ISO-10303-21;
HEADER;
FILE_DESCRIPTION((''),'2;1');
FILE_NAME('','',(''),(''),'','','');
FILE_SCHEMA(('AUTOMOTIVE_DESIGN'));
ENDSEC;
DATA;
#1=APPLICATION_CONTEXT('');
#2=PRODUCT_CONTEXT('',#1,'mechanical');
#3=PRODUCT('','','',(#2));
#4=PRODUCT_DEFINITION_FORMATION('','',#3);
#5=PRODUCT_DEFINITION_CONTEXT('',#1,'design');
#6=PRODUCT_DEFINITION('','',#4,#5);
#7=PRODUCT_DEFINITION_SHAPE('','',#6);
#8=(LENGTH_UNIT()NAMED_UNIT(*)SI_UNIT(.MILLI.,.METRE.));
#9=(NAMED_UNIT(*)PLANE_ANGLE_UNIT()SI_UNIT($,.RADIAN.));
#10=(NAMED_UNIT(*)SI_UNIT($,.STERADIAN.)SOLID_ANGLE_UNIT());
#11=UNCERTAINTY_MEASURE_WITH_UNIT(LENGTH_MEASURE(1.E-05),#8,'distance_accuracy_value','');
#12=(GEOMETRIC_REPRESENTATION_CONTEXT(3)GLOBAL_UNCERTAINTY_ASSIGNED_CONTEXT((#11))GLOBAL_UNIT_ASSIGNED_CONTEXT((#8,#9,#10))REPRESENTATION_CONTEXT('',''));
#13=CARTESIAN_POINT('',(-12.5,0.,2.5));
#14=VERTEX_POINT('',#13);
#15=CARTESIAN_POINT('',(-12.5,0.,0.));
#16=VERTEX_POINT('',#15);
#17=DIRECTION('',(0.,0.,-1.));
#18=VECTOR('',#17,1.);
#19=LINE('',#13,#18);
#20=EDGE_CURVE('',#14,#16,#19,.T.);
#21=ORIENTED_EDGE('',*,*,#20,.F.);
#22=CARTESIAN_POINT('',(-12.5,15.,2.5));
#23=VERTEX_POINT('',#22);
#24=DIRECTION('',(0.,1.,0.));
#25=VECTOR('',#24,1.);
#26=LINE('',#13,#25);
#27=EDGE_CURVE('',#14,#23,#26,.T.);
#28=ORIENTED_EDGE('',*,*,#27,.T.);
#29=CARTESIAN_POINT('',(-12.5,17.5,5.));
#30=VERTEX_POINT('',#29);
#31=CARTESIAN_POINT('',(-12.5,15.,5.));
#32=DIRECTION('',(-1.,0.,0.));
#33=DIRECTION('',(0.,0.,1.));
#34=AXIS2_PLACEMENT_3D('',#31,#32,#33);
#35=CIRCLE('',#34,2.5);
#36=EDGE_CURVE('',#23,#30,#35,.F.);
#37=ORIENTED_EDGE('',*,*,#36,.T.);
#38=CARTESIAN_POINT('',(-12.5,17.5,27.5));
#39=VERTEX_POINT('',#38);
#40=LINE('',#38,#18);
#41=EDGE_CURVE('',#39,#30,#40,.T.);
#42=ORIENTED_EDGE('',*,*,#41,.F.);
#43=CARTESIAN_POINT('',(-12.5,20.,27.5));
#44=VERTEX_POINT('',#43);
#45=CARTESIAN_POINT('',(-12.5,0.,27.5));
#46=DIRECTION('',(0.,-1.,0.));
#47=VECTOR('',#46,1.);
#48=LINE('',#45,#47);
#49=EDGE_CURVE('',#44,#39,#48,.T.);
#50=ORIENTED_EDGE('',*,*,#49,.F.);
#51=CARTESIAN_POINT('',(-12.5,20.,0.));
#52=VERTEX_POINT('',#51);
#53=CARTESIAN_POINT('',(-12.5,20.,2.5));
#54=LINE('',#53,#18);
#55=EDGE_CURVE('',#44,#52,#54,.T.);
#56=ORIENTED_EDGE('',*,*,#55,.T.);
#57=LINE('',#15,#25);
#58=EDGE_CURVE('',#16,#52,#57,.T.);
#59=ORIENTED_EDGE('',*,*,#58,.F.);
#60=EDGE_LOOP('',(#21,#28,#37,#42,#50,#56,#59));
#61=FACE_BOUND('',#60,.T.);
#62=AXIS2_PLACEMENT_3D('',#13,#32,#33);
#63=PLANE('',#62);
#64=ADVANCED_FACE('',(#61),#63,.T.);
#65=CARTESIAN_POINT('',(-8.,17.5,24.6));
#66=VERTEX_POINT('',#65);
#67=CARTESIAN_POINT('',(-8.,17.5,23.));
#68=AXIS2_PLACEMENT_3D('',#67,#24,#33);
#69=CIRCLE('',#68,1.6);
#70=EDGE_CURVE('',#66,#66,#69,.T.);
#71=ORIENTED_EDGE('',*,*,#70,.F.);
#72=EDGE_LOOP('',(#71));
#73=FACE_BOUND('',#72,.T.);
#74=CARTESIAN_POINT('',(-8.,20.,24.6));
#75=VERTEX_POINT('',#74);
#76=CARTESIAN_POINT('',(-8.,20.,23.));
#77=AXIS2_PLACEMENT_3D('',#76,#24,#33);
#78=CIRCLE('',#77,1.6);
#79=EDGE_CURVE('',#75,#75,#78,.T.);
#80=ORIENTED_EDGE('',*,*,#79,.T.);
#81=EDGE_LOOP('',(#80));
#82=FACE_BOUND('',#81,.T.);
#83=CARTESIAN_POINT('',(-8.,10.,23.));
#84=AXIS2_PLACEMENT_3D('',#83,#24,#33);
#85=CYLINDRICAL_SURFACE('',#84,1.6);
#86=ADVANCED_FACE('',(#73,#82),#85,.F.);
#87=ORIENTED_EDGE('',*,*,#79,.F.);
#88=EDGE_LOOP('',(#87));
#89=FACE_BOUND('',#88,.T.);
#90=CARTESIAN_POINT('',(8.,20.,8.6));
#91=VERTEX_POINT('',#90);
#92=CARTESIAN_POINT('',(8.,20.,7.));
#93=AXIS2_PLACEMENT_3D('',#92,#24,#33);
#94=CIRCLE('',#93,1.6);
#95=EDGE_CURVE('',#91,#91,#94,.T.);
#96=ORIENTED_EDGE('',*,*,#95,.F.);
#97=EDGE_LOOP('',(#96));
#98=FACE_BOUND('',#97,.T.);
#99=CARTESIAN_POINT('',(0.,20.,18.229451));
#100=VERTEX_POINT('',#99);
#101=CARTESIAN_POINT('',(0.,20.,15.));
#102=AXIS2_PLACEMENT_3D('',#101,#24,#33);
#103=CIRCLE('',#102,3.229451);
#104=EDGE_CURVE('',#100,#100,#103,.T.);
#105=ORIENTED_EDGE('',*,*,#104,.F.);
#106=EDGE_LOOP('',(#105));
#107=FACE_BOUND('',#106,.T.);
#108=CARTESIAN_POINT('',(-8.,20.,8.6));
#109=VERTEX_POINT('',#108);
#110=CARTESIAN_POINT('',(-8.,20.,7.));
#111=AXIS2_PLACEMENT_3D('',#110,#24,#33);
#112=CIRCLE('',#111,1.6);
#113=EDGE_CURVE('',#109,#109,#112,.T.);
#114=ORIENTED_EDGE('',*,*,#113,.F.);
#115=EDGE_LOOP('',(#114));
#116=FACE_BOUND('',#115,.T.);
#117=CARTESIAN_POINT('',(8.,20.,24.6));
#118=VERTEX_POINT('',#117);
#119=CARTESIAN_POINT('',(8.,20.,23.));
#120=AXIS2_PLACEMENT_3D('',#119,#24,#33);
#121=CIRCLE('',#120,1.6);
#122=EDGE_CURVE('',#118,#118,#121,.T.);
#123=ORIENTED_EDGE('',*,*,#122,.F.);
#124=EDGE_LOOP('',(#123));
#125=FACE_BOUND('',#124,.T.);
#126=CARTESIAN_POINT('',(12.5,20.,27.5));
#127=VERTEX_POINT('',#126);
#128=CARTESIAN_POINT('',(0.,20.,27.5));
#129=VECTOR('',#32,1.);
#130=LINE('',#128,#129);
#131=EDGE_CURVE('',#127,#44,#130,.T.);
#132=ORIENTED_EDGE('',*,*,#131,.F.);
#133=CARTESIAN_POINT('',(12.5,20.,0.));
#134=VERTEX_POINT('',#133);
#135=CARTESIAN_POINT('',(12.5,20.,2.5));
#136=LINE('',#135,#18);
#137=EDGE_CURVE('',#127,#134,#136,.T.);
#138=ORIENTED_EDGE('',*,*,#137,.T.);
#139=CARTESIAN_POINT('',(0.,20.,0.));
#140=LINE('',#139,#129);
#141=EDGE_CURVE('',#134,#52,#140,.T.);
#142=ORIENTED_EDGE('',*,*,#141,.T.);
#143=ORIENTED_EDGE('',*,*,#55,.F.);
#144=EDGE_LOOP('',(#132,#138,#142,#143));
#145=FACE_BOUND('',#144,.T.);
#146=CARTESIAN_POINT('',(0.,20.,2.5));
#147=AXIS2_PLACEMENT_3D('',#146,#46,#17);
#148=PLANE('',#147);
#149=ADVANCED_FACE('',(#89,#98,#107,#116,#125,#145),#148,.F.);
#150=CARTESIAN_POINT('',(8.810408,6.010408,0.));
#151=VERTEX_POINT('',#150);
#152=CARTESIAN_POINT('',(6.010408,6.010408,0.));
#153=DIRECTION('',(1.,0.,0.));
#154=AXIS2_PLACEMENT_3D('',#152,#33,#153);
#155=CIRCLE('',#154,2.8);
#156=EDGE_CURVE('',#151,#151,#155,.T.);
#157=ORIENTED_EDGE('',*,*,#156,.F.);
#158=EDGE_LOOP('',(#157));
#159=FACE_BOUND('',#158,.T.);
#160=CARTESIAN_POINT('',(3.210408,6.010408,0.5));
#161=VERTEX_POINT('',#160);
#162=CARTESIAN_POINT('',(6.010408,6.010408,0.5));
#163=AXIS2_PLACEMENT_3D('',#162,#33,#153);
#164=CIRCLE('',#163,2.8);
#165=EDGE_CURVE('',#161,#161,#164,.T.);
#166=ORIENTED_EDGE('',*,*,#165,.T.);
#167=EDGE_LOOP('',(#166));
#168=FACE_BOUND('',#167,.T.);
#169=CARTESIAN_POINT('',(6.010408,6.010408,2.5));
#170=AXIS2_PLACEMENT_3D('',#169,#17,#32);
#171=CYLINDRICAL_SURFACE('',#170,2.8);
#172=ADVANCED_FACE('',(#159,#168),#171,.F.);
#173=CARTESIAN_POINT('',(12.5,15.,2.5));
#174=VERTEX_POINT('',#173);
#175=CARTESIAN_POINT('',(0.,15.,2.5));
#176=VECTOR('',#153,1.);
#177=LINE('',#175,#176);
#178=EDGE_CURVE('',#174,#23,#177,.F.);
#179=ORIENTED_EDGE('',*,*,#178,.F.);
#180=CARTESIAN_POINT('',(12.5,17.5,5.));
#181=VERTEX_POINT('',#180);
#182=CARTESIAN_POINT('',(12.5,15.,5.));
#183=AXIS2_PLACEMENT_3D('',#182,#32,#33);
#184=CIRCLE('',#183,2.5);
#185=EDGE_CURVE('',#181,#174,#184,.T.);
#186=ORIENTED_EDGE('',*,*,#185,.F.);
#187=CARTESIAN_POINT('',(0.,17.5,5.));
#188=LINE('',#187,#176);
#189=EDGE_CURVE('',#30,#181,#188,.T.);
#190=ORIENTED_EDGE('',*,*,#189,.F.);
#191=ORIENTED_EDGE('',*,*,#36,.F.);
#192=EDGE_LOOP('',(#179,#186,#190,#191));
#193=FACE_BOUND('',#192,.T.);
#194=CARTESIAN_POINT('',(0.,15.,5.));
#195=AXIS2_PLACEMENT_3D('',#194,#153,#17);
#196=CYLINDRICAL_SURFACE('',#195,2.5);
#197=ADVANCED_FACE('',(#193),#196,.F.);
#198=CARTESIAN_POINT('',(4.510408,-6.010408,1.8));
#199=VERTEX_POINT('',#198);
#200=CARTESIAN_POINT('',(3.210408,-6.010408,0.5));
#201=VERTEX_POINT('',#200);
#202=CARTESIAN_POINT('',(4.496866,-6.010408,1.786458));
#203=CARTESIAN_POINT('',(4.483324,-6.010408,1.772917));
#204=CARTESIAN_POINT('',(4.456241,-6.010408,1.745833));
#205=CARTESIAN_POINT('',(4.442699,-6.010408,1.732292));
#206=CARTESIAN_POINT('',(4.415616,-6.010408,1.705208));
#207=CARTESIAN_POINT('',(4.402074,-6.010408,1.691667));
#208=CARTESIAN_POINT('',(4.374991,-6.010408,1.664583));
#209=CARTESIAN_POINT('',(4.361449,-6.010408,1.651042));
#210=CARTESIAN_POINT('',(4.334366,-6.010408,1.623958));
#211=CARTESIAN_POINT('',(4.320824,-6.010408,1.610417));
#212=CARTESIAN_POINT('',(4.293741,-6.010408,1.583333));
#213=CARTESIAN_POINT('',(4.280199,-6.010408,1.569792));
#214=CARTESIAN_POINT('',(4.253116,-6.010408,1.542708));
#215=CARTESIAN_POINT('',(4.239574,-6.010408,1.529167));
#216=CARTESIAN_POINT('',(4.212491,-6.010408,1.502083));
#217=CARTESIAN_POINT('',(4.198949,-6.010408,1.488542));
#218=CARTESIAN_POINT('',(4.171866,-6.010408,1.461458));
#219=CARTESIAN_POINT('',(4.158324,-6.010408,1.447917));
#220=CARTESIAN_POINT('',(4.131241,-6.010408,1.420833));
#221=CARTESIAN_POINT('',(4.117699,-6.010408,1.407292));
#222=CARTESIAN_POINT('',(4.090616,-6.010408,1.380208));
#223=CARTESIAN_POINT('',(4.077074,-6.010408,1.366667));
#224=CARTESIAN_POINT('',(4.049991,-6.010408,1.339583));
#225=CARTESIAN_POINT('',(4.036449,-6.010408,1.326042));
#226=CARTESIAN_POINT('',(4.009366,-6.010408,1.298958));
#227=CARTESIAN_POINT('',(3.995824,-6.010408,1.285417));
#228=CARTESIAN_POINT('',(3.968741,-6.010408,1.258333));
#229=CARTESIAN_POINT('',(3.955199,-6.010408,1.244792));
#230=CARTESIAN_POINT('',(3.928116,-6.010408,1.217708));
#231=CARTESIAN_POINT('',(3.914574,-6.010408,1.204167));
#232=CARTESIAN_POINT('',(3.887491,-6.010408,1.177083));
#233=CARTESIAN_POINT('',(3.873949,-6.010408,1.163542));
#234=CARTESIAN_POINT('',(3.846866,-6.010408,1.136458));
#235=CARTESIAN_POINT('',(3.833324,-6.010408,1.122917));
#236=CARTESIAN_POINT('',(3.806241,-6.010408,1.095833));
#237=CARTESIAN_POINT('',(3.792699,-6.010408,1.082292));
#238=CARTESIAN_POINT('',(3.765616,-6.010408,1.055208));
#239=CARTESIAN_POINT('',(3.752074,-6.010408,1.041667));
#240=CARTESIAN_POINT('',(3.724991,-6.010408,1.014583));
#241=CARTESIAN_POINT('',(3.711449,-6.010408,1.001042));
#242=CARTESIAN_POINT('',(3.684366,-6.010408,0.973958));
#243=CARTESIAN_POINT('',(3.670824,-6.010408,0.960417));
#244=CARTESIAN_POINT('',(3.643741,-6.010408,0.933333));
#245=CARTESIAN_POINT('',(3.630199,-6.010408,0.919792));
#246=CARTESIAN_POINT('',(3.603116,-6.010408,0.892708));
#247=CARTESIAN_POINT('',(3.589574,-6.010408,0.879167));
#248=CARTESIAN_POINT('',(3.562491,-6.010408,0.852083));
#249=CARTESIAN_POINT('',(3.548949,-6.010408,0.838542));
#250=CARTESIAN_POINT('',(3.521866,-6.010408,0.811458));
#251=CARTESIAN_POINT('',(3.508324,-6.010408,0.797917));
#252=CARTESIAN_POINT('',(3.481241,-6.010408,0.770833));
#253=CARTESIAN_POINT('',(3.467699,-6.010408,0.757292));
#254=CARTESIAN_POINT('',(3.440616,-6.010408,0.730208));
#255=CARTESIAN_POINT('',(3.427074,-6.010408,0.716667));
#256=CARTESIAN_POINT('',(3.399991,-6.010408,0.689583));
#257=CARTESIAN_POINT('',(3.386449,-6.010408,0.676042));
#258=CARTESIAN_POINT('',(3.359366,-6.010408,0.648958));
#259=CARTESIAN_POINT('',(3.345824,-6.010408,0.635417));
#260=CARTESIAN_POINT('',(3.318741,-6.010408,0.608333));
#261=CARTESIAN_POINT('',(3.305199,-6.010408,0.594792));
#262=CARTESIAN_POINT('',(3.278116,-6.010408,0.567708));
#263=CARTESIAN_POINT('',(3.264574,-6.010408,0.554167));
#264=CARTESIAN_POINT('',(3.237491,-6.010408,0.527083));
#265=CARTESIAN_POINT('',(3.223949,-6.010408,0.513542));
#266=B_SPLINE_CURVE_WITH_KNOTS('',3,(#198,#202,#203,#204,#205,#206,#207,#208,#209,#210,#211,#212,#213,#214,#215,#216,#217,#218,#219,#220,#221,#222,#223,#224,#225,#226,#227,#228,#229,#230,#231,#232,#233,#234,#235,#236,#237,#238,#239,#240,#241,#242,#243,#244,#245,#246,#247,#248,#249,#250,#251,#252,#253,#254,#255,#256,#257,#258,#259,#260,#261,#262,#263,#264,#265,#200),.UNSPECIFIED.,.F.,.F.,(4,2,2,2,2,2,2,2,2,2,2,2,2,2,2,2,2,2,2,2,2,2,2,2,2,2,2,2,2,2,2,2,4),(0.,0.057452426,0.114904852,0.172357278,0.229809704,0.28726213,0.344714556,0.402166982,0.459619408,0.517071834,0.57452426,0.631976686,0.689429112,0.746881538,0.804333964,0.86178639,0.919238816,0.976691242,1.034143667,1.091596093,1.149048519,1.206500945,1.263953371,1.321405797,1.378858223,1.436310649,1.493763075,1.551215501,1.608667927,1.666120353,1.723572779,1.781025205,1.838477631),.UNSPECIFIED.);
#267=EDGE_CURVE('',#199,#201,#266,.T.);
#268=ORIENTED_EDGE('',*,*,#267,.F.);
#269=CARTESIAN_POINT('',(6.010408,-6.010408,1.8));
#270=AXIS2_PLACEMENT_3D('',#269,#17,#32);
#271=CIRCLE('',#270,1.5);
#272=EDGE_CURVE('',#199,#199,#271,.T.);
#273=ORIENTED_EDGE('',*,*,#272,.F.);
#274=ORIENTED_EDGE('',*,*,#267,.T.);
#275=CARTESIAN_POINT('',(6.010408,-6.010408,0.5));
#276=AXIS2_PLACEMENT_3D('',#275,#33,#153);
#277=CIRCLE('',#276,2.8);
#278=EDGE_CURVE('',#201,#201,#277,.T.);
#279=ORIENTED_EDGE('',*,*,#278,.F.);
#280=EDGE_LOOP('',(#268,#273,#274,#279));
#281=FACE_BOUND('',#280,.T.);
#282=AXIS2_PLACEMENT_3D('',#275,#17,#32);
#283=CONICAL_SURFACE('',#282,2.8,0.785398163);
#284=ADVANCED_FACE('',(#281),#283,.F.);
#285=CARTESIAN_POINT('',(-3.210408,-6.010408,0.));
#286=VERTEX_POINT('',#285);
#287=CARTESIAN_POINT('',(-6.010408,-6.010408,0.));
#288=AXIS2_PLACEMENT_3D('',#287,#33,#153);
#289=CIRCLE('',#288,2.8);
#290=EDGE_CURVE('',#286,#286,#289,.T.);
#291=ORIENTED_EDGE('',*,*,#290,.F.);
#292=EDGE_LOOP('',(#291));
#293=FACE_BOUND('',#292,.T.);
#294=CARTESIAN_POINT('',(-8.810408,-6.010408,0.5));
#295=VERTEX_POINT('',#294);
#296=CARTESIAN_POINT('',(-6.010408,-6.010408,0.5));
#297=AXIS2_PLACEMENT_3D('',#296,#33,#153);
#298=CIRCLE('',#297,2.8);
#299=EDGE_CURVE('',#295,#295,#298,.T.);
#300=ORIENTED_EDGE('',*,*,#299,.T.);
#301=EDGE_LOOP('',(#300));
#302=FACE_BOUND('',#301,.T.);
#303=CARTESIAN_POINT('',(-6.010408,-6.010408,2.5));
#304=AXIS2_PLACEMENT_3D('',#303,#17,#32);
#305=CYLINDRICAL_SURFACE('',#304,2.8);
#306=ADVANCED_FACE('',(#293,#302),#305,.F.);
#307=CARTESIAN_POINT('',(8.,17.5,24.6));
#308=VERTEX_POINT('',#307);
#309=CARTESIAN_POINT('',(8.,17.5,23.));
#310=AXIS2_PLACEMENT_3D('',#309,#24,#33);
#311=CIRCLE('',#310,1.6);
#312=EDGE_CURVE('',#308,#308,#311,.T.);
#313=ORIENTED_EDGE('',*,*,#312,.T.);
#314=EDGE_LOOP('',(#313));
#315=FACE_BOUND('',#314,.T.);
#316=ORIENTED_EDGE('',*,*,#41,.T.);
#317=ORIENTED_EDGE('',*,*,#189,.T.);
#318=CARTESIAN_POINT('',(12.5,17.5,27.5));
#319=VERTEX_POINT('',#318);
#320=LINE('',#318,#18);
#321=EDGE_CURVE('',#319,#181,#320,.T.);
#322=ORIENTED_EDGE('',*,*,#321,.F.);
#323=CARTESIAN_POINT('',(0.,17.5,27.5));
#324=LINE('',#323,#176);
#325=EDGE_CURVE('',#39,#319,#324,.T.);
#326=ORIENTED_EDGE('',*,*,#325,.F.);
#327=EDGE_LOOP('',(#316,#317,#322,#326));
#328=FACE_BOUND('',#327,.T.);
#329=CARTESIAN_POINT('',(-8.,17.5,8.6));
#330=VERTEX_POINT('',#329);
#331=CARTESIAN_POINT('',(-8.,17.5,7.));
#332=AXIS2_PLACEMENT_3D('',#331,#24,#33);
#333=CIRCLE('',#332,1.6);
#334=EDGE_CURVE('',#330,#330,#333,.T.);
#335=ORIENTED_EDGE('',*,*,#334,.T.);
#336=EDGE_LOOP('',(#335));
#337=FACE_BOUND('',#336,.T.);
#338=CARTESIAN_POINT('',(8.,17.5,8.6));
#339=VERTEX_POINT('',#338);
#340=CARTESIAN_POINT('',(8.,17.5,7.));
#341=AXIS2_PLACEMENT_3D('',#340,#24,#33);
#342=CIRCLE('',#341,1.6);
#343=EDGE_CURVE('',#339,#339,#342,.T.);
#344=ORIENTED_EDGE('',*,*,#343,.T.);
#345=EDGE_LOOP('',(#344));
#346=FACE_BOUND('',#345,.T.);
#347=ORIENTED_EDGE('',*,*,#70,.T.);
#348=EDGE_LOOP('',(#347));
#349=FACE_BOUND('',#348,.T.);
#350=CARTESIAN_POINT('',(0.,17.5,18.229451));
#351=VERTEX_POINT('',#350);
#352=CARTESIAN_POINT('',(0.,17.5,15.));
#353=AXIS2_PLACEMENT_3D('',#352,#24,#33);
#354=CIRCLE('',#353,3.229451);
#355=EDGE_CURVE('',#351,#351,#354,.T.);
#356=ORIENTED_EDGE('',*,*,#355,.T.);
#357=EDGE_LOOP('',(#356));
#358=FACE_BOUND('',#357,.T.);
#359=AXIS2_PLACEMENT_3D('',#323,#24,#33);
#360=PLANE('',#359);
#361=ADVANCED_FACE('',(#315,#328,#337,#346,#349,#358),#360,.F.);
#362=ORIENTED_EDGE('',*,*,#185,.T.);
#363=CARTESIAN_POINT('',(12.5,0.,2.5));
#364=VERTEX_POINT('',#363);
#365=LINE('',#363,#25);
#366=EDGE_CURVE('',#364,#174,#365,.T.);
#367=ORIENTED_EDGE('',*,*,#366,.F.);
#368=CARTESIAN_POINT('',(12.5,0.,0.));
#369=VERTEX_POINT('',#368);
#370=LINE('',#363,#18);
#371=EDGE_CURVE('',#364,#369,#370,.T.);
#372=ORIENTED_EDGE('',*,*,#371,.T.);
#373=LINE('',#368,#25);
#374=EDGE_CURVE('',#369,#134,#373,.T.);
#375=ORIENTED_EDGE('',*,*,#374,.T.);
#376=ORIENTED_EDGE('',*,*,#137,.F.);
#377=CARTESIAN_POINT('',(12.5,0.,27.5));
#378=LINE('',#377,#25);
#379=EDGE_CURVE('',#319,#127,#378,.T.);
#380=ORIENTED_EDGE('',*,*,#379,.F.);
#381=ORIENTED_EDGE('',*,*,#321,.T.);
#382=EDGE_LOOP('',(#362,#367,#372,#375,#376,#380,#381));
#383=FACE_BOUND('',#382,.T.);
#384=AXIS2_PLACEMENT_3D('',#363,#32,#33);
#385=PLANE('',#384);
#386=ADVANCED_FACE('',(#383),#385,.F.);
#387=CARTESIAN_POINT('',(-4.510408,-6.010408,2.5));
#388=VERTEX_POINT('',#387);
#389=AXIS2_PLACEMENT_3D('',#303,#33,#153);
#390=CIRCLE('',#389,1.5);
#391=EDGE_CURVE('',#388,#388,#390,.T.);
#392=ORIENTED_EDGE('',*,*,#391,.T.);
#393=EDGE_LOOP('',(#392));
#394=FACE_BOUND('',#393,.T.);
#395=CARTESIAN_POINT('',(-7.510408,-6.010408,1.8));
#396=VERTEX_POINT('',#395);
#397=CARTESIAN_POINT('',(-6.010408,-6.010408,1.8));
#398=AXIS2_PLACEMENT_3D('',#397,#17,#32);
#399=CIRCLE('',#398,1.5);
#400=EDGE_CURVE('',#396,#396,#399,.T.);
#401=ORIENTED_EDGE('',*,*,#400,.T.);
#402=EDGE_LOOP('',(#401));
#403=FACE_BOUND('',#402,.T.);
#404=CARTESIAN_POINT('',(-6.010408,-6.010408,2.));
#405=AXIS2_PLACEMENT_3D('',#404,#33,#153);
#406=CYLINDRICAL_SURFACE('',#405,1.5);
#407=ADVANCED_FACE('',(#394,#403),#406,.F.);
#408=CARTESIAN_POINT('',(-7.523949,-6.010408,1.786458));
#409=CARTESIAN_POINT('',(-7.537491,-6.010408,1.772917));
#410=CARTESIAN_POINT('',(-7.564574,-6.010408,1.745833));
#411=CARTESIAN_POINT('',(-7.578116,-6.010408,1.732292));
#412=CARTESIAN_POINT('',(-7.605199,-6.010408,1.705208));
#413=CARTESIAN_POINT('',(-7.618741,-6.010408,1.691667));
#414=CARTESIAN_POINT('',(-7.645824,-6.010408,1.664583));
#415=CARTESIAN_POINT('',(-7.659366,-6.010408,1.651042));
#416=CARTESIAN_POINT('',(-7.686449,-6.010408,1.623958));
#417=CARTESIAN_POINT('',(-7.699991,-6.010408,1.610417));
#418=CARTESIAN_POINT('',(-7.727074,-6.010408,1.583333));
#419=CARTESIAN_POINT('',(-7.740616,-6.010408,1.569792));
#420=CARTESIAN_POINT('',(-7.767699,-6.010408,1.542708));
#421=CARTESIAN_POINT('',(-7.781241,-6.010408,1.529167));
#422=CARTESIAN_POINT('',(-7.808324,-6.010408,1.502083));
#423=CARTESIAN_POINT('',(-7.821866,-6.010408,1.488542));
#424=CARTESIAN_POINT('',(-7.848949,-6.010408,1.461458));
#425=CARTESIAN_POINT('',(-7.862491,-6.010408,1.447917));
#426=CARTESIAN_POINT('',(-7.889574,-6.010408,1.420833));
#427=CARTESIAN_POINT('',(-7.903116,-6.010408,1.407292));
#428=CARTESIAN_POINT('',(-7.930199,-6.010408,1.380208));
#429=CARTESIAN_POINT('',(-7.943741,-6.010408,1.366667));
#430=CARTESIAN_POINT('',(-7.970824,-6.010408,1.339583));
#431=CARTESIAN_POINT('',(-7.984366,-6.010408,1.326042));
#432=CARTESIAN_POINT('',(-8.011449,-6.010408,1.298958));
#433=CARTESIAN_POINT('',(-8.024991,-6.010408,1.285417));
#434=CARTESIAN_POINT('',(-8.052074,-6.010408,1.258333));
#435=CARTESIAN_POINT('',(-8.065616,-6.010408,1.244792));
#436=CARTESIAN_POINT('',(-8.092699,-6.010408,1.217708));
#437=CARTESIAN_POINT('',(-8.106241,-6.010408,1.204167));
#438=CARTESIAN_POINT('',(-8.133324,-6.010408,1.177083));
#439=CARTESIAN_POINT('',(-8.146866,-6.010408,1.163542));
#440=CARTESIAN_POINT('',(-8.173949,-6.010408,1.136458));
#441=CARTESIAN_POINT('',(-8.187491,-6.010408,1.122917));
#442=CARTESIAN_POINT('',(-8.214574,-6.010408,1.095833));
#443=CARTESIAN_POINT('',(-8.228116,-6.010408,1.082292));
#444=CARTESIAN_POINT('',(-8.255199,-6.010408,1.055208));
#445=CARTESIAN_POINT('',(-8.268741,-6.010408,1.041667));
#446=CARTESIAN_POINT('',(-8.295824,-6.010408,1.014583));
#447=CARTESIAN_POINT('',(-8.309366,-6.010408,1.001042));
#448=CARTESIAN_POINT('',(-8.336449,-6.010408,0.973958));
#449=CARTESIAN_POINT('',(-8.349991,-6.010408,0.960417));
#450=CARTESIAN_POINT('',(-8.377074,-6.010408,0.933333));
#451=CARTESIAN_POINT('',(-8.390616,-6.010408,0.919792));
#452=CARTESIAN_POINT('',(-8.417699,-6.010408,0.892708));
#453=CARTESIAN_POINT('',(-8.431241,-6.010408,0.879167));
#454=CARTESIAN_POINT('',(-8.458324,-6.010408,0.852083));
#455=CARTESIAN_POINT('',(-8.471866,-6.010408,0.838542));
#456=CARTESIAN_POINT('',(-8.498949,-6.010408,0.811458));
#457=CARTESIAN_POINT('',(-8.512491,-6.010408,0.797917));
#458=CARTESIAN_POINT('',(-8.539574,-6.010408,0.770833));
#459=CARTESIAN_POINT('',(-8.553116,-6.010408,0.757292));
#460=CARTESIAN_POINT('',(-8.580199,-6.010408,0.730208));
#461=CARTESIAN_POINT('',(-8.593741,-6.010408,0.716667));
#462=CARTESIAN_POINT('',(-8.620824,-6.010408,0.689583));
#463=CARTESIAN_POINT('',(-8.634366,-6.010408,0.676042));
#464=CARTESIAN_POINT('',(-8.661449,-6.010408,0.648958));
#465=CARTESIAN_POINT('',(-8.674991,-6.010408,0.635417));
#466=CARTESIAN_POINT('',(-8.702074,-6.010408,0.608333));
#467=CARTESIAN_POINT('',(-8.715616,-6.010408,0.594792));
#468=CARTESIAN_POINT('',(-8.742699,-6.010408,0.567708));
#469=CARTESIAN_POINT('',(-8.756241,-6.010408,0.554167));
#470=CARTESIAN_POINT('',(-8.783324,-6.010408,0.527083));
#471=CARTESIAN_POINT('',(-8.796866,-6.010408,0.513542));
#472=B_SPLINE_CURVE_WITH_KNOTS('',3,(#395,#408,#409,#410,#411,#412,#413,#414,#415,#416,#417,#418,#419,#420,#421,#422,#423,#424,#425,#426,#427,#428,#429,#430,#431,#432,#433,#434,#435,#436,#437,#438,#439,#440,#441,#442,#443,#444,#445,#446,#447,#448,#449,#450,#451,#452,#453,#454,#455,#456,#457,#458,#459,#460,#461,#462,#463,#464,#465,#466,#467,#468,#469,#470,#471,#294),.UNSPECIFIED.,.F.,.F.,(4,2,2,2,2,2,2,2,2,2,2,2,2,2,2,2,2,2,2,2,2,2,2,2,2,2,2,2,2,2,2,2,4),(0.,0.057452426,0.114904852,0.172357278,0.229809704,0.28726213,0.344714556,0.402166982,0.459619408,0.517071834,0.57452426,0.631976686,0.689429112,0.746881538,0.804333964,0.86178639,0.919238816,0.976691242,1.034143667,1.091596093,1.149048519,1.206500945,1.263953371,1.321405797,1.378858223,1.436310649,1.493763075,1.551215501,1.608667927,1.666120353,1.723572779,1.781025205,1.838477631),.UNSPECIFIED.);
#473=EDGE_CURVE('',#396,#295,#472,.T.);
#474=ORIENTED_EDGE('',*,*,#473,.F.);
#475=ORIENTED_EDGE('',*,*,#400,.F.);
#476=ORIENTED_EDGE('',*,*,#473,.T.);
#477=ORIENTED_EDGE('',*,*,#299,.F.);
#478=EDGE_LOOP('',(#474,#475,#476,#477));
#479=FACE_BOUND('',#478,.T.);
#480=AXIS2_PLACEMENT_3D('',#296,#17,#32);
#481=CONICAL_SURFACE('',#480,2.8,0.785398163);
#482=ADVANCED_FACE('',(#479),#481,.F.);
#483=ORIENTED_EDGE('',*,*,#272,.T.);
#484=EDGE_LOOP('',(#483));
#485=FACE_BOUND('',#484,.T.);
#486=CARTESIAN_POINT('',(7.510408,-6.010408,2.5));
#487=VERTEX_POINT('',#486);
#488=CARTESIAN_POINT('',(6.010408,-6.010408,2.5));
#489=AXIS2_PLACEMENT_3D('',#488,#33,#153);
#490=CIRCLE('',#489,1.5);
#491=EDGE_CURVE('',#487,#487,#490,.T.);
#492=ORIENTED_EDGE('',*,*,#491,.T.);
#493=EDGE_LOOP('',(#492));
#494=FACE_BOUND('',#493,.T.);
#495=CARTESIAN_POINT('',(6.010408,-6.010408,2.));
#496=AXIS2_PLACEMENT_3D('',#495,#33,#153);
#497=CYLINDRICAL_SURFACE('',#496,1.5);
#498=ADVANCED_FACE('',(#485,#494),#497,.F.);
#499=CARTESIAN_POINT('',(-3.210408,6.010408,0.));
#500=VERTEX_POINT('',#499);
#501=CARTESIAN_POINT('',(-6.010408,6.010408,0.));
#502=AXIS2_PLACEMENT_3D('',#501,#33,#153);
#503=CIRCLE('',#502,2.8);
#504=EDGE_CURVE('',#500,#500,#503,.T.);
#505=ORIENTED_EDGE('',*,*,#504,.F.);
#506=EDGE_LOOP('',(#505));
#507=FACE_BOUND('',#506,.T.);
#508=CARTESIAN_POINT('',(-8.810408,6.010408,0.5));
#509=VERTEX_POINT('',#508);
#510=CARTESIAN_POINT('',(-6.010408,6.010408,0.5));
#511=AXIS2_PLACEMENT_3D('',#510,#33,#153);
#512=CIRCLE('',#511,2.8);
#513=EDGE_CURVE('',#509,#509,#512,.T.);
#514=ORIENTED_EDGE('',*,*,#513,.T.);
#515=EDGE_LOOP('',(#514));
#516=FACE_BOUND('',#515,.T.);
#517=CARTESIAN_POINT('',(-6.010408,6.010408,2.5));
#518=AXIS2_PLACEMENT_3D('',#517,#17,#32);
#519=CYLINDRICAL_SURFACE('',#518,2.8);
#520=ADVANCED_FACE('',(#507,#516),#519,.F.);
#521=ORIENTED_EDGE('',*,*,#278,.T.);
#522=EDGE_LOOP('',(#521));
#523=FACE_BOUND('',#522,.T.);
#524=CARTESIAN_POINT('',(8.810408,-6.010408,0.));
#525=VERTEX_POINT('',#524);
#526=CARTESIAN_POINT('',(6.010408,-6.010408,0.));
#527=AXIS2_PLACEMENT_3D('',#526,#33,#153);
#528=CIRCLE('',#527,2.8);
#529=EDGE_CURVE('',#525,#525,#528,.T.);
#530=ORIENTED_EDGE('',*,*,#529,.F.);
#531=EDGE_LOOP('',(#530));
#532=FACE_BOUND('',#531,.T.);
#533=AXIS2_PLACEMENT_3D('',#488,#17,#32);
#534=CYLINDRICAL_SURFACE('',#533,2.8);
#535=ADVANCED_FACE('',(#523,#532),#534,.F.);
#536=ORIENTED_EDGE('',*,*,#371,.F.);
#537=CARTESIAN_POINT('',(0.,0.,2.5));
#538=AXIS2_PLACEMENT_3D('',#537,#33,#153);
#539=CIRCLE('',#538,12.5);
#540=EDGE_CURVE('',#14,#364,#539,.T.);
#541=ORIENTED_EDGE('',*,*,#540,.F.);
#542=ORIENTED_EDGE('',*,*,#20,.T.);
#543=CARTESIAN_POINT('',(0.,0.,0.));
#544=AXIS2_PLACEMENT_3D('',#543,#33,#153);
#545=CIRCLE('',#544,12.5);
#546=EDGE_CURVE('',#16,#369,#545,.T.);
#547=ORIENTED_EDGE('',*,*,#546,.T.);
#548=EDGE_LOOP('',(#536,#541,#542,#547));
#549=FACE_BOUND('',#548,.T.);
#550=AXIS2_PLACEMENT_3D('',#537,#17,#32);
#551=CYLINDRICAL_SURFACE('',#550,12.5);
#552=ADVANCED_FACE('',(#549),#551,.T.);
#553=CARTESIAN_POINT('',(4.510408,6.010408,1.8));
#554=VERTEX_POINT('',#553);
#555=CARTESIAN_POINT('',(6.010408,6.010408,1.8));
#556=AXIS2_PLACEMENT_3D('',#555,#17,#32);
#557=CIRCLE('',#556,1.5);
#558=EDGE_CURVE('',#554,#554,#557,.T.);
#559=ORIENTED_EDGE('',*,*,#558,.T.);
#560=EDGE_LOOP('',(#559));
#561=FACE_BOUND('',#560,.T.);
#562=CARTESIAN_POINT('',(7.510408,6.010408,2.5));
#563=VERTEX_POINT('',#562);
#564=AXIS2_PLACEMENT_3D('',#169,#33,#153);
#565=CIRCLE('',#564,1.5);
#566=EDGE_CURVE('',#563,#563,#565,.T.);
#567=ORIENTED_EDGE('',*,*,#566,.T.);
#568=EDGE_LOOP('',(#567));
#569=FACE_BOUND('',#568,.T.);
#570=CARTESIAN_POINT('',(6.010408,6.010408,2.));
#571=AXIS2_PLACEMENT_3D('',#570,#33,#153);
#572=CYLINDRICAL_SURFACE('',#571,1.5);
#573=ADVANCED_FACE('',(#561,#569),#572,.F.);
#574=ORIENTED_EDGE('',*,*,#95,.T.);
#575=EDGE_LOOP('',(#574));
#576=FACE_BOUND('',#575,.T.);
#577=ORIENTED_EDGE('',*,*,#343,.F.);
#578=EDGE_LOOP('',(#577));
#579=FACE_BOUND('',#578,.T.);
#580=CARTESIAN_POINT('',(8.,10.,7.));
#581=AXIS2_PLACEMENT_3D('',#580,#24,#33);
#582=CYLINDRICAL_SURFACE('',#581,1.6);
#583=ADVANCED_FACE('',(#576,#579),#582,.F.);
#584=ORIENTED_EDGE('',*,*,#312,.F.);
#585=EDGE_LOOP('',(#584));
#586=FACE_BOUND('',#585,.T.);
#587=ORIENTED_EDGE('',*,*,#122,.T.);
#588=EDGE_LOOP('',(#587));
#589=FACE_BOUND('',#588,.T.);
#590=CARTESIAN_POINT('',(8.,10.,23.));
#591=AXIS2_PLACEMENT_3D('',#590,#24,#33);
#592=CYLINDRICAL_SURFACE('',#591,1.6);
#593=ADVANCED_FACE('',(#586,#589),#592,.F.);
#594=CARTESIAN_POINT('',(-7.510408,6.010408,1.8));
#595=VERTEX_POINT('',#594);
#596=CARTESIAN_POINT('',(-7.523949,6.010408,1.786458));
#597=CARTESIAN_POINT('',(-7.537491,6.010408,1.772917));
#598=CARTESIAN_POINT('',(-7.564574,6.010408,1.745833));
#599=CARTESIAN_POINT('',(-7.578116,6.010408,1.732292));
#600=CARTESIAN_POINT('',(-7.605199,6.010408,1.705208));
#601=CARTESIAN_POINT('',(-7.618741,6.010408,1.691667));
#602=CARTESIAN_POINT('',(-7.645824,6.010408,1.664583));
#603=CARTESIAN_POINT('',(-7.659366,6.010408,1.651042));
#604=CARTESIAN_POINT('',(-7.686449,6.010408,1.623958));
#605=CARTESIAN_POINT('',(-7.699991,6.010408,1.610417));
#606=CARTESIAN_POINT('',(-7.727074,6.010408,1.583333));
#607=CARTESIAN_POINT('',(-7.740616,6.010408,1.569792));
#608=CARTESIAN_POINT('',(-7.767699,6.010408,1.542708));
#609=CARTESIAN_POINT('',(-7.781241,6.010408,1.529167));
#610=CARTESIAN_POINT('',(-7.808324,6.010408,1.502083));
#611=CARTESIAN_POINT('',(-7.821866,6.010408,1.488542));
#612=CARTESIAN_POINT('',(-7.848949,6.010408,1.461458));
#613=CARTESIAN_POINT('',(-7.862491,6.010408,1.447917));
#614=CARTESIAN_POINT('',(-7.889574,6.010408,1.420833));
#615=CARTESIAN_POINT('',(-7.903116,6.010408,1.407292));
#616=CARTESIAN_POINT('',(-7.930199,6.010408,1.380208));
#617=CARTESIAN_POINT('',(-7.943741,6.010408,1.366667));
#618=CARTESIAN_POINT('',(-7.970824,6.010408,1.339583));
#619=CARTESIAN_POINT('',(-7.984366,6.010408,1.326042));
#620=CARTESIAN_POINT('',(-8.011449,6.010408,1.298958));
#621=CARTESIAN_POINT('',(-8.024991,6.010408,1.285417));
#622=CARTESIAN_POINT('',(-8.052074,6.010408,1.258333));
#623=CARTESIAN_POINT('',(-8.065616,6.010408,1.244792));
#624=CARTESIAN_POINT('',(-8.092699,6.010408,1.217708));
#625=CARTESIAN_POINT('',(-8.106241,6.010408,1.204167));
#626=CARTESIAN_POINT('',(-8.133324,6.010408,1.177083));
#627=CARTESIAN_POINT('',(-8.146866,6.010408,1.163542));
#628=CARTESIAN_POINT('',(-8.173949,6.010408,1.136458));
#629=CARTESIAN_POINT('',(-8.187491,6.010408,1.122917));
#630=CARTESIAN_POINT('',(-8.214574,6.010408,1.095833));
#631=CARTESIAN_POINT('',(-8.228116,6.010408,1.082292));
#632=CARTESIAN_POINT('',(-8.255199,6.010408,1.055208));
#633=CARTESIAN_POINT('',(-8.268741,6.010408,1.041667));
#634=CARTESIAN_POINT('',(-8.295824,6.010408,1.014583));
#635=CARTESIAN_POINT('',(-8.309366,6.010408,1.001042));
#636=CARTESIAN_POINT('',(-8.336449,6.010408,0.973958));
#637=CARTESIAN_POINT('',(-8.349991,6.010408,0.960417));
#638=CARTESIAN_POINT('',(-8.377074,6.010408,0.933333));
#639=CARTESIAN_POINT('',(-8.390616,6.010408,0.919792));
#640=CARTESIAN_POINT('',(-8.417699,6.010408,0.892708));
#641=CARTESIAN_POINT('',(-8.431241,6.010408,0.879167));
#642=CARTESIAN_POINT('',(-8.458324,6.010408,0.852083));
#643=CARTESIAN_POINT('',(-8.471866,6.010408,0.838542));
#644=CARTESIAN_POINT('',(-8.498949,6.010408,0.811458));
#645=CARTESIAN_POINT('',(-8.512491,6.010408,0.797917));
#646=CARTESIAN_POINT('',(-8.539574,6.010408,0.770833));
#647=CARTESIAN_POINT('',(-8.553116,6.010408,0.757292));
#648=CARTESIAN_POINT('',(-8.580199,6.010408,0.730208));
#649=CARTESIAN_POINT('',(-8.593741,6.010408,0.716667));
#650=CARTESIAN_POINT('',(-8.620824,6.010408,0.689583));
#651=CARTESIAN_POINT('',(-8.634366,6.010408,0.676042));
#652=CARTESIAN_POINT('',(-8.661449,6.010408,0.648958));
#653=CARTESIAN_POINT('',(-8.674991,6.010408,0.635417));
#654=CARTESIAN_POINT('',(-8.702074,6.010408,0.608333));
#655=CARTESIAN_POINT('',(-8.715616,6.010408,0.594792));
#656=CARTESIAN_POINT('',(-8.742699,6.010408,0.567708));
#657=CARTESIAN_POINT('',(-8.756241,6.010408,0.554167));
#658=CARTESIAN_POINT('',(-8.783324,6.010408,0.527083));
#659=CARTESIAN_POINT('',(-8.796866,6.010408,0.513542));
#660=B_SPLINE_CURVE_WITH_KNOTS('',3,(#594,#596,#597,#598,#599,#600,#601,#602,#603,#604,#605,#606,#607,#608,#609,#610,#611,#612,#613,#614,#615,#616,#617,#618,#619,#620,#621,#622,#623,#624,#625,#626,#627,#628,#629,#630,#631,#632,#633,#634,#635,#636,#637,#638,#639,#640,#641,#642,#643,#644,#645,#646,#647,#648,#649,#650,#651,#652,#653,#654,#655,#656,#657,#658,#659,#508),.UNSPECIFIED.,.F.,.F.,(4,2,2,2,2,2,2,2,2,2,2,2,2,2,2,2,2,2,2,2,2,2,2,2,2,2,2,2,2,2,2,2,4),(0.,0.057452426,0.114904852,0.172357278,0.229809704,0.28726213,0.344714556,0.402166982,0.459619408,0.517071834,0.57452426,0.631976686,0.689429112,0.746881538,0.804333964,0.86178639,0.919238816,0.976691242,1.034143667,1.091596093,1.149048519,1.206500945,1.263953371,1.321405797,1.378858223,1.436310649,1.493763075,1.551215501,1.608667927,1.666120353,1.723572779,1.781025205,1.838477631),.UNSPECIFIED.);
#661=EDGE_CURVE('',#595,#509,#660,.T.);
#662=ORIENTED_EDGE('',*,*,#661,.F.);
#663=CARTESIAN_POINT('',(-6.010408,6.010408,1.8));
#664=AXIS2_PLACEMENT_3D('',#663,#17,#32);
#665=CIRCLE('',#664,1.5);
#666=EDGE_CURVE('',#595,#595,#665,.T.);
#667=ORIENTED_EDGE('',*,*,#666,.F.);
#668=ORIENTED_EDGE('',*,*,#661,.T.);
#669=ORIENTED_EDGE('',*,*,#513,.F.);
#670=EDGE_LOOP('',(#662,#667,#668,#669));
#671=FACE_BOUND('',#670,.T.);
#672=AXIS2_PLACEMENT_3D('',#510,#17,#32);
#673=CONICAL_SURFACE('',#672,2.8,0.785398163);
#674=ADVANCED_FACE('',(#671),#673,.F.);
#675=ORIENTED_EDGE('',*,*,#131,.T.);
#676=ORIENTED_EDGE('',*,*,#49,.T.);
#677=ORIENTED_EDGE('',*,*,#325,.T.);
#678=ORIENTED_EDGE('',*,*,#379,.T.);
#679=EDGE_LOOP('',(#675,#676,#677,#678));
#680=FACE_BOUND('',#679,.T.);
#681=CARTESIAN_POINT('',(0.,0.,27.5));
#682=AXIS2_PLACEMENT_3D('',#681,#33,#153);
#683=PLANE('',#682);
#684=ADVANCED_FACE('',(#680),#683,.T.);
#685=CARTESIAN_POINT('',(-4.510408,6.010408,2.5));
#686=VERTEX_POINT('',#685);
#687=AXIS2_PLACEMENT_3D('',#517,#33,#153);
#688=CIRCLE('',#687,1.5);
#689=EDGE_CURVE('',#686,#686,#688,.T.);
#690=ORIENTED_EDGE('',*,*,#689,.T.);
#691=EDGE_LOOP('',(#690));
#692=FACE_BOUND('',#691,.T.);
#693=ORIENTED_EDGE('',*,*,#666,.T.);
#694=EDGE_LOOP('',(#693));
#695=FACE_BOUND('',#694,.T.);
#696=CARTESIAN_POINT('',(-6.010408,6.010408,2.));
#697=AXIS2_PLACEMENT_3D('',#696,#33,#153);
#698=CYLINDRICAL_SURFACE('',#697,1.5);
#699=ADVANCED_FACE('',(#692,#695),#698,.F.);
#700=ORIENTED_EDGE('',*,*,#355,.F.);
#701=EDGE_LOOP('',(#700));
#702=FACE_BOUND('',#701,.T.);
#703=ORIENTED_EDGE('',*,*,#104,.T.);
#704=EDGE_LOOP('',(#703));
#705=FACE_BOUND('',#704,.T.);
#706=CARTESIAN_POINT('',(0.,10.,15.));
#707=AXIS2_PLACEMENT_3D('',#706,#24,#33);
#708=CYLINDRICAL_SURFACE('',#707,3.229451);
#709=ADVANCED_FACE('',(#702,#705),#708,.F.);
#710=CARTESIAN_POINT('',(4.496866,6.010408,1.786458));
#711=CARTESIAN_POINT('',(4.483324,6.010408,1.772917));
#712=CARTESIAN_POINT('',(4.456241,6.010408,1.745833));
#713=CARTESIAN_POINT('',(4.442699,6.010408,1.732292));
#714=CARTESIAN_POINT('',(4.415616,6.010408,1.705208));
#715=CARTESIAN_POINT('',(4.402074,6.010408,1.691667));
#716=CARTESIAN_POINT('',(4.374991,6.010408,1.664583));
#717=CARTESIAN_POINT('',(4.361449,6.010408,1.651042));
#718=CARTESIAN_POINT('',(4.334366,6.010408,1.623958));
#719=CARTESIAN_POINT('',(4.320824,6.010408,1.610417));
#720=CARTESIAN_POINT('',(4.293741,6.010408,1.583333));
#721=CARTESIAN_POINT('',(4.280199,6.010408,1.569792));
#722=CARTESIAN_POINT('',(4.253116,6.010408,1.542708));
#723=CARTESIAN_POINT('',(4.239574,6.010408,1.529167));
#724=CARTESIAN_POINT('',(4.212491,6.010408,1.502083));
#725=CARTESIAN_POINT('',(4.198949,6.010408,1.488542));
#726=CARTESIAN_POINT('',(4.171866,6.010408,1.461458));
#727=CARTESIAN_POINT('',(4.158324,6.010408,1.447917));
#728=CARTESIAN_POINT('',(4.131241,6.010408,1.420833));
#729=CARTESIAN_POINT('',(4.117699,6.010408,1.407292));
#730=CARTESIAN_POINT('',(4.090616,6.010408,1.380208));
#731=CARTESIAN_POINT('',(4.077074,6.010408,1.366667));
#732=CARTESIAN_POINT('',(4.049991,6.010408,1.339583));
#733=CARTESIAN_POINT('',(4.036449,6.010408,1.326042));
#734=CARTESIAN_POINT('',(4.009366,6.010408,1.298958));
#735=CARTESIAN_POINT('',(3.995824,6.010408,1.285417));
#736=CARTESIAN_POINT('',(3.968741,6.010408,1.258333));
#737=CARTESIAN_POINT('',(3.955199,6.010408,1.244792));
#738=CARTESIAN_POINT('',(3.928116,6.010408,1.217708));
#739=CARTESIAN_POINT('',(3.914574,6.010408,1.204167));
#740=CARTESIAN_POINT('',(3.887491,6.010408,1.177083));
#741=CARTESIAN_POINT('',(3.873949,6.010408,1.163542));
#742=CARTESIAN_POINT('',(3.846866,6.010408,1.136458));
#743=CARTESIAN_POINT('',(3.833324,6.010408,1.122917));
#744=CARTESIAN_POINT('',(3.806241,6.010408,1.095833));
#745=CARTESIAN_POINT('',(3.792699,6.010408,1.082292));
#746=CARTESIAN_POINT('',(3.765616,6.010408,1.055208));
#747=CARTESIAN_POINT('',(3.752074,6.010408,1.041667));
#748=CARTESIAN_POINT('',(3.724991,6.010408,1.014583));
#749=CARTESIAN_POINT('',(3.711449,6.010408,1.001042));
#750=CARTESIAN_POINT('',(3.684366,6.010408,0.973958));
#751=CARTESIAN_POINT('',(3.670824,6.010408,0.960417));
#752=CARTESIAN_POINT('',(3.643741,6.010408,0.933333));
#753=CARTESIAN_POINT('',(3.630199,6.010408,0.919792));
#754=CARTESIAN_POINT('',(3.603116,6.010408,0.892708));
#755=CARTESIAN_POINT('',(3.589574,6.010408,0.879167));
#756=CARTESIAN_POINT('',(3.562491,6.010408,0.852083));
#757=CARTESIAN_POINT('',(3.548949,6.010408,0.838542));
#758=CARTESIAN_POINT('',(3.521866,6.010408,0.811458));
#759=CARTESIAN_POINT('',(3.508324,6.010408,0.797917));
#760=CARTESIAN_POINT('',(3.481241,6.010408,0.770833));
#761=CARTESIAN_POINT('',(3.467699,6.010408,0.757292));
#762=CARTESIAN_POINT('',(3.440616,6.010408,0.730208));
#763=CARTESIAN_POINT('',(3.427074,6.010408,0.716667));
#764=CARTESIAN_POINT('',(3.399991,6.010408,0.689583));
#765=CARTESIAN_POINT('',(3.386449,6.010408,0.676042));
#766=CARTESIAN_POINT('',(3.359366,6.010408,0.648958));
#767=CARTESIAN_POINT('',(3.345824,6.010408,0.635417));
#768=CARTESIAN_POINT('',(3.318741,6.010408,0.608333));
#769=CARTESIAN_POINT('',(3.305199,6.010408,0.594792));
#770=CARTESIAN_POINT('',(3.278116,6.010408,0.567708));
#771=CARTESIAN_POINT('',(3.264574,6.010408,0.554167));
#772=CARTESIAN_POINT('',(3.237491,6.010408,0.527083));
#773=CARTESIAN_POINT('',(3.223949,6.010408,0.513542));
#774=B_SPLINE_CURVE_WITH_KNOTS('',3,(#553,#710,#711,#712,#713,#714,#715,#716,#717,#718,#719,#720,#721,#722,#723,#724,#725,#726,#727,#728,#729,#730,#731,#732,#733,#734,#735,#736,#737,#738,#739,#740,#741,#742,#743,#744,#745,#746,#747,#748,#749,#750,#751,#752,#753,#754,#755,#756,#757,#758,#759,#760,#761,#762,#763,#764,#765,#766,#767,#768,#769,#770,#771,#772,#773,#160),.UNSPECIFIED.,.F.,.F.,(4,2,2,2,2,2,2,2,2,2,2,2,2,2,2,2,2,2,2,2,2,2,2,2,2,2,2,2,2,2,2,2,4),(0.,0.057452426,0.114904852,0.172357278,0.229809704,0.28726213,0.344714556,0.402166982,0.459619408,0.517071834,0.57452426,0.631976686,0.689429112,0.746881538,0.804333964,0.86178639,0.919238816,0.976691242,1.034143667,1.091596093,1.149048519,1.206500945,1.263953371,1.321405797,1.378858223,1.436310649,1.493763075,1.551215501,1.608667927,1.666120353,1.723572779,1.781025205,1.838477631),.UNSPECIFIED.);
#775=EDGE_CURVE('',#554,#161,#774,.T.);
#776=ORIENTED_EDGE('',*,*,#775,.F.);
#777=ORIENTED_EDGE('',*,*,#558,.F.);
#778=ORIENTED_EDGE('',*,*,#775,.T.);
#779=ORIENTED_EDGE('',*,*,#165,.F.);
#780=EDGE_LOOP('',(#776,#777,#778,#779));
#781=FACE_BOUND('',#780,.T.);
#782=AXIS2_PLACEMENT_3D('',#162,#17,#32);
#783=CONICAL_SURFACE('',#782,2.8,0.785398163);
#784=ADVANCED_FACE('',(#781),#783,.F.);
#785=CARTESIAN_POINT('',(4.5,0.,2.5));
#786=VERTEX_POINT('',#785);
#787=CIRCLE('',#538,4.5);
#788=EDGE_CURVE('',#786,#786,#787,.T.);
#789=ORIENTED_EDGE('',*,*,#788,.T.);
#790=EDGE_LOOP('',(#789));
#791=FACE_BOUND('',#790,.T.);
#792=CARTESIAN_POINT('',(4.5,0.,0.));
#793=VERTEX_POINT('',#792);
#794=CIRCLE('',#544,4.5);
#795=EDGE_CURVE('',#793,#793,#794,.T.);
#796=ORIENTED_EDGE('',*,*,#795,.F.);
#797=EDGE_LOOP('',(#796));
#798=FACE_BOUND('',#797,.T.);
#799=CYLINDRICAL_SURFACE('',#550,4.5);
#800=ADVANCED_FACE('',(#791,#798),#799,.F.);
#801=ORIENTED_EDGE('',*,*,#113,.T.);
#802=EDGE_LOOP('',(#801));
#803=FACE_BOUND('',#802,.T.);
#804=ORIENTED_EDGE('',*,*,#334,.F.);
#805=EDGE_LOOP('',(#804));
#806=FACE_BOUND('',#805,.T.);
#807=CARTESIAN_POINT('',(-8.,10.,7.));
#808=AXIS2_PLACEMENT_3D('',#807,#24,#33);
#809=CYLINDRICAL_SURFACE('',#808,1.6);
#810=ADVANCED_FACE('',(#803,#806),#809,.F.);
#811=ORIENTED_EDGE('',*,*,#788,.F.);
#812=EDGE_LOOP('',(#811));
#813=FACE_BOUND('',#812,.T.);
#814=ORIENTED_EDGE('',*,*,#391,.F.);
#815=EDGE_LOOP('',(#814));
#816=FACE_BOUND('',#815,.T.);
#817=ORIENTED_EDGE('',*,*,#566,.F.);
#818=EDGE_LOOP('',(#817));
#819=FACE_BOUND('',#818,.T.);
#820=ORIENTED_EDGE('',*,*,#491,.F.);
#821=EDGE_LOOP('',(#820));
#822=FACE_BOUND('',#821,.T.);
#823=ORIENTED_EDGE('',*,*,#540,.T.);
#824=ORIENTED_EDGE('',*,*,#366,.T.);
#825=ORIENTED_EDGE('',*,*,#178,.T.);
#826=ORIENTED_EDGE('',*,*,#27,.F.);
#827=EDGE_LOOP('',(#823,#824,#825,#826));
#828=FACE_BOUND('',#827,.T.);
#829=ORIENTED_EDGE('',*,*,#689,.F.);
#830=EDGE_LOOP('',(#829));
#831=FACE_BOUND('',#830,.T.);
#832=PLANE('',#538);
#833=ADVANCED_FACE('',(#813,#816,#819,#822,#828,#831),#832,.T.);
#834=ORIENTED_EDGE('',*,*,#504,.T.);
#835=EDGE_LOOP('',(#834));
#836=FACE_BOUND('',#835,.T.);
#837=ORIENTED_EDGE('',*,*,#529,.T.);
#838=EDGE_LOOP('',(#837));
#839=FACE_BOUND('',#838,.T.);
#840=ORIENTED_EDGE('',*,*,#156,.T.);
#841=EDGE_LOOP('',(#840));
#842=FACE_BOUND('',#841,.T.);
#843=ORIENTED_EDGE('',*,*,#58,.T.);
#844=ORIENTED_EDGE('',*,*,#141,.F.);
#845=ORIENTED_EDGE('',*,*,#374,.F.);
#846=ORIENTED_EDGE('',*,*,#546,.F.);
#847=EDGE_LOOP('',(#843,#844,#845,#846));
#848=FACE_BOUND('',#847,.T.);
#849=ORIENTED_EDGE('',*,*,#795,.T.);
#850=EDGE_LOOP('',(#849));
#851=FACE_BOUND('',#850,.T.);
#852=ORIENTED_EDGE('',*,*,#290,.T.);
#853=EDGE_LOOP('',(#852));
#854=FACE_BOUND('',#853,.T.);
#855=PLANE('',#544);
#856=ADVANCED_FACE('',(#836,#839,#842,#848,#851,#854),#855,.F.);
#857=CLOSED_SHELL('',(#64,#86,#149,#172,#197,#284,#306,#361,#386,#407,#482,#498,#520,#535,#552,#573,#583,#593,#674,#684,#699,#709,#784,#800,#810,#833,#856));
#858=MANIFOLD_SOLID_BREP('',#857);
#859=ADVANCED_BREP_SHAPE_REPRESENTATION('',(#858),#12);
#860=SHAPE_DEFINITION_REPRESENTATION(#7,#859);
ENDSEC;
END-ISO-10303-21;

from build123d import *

# Parameters (mm, degrees)
SKETCH1_R           = 2.8
SKETCH1_R_2         = 4.5
BOSS_EXTRUDE1_DEPTH = 2.5
SKETCH2_W           = 25
SKETCH2_H           = 2.5
BOSS_EXTRUDE2_DEPTH = 25
FILLET1_R           = 2.5
SKETCH4_R           = 3.229450522
CUT_EXTRUDE1_DEPTH  = 10
BOSS_EXTRUDE3_START = -2
SKETCH3_R           = 2.8
SKETCH3_R_2         = 1.5
BOSS_EXTRUDE3_DEPTH = 0.5
CHAMFER4_SIZE       = 1.5


with BuildPart() as part:
    # Sketch1 → Boss-Extrude1 (new body)
    with BuildSketch(Plane.XY):
        with BuildLine():
            Line((-12.5, 0), (-12.5, 20))
            Line((-12.5, 20), (12.5, 20))
            Line((12.5, 20), (12.5, 0))
            ThreePointArc((12.5, 0), (0, -12.5), (-12.5, 0))
        make_face()
        with Locations((-6.01040764, 6.01040764)):
            Circle(SKETCH1_R, mode=Mode.SUBTRACT)
        with Locations((-6.01040764, -6.01040764)):
            Circle(SKETCH1_R, mode=Mode.SUBTRACT)
        with Locations((6.01040764, -6.01040764)):
            Circle(SKETCH1_R, mode=Mode.SUBTRACT)
        with Locations((6.01040764, 6.01040764)):
            Circle(SKETCH1_R, mode=Mode.SUBTRACT)
        Circle(SKETCH1_R_2, mode=Mode.SUBTRACT)
    extrude(amount=BOSS_EXTRUDE1_DEPTH)

    # Sketch2 → Boss-Extrude2 (add)
    with BuildSketch(Plane.XY.offset(2.5)):
        with Locations((0, 18.75)):
            Rectangle(SKETCH2_W, SKETCH2_H)
    extrude(amount=BOSS_EXTRUDE2_DEPTH)

    # Fillet1
    fillet1_edges = [part.edges().sort_by_distance(p)[0] for p in [
        (0, 17.5, 2.5),
    ]]
    fillet(fillet1_edges, radius=FILLET1_R)

    # Sketch4 → Cut-Extrude1 (cut)
    with BuildSketch(Plane(origin=(0, 20, 0), x_dir=(1, 0, 0), z_dir=(0, 1, 0))):
        with BuildLine():
            ThreePointArc((-8, -21.4), (-9.13137085, -24.13137085), (-6.4, -23))
            Line((-6.4, -23), (-8, -23))
            Line((-8, -23), (-8, -21.4))
        make_face()
        with BuildLine():
            Line((-8, -23), (-6.4, -23))
            ThreePointArc((-6.4, -23), (-6.86862915, -21.86862915), (-8, -21.4))
            Line((-8, -21.4), (-8, -23))
        make_face()
        with BuildLine():
            ThreePointArc((8, -21.4), (6.86862915, -21.86862915), (6.4, -23))
            Line((6.4, -23), (8, -23))
            Line((8, -23), (8, -21.4))
        make_face()
        with BuildLine():
            Line((8, -23), (6.4, -23))
            ThreePointArc((6.4, -23), (8, -24.6), (9.6, -23))
            ThreePointArc((9.6, -23), (9.13137085, -21.86862915), (8, -21.4))
            Line((8, -21.4), (8, -23))
        make_face()
        with BuildLine():
            ThreePointArc((6.4, -7), (6.86862915, -8.13137085), (8, -8.6))
            Line((8, -8.6), (8, -7))
            Line((8, -7), (6.4, -7))
        make_face()
        with BuildLine():
            Line((8, -7), (8, -8.6))
            ThreePointArc((8, -8.6), (9.13137085, -8.13137085), (9.6, -7))
            ThreePointArc((9.6, -7), (8, -5.4), (6.4, -7))
            Line((6.4, -7), (8, -7))
        make_face()
        with Locations(Location((0, -15, 0), (0, 0, 270))):
            Circle(SKETCH4_R)
        with BuildLine():
            ThreePointArc((-6.4, -7), (-9.13137085, -5.86862915), (-8, -8.6))
            Line((-8, -8.6), (-8, -7))
            Line((-8, -7), (-6.4, -7))
        make_face()
        with BuildLine():
            Line((-8, -7), (-8, -8.6))
            ThreePointArc((-8, -8.6), (-6.86862915, -8.13137085), (-6.4, -7))
            Line((-6.4, -7), (-8, -7))
        make_face()
    extrude(amount=-CUT_EXTRUDE1_DEPTH, mode=Mode.SUBTRACT)

    # Sketch3 → Boss-Extrude3 (add)
    # profile 1 of 4: a face of its own
    with BuildSketch(Plane(origin=(0, 0, 0), x_dir=(-1, 0, 0), z_dir=(0, 0, -1)).offset(BOSS_EXTRUDE3_START)):
        with Locations(Location((-6.01040764, 6.01040764, 0), (0, 0, 180))):
            Circle(SKETCH3_R)
        with Locations(Location((-6.01040764, 6.01040764, 0), (0, 0, 180))):
            Circle(SKETCH3_R_2, mode=Mode.SUBTRACT)
    # profile 2 of 4: a face of its own
    with BuildSketch(Plane(origin=(0, 0, 0), x_dir=(-1, 0, 0), z_dir=(0, 0, -1)).offset(BOSS_EXTRUDE3_START)):
        with Locations(Location((6.01040764, 6.01040764, 0), (0, 0, 180))):
            Circle(SKETCH3_R)
        with Locations(Location((6.01040764, 6.01040764, 0), (0, 0, 180))):
            Circle(SKETCH3_R_2, mode=Mode.SUBTRACT)
    # profile 3 of 4: a face of its own
    with BuildSketch(Plane(origin=(0, 0, 0), x_dir=(-1, 0, 0), z_dir=(0, 0, -1)).offset(BOSS_EXTRUDE3_START)):
        with Locations(Location((6.01040764, -6.01040764, 0), (0, 0, 180))):
            Circle(SKETCH3_R)
        with Locations(Location((6.01040764, -6.01040764, 0), (0, 0, 180))):
            Circle(SKETCH3_R_2, mode=Mode.SUBTRACT)
    # profile 4 of 4: a face of its own
    with BuildSketch(Plane(origin=(0, 0, 0), x_dir=(-1, 0, 0), z_dir=(0, 0, -1)).offset(BOSS_EXTRUDE3_START)):
        with Locations(Location((-6.01040764, -6.01040764, 0), (0, 0, 180))):
            Circle(SKETCH3_R)
        with Locations(Location((-6.01040764, -6.01040764, 0), (0, 0, 180))):
            Circle(SKETCH3_R_2, mode=Mode.SUBTRACT)
    extrude(amount=-BOSS_EXTRUDE3_DEPTH)

    # Chamfer4
    # the kernel refuses this chamfer: 1.5 mm, written as the material it adds along each edge
    with BuildSketch(Plane(origin=(6.01040764, 6.01040764, 2), x_dir=(1, 0, 0), z_dir=(0, 1, 0))) as chamfer4_piece_1_section:
        Polygon((2.8, CHAMFER4_SIZE), (2.8 - CHAMFER4_SIZE, 0), (2.8, 0), align=None)
    chamfer4_piece_1 = revolve(axis=Axis((6.01040764, 6.01040764, 2), (0, 0, -1)), mode=Mode.PRIVATE)
    chamfer4_piece_1 = chamfer4_piece_1 - Plane(origin=(6.01040764, 6.01040764, 1.147189391), x_dir=(1, 0, 0), z_dir=(0, 0, -1)) * Cylinder(1.5, 12, mode=Mode.PRIVATE)
    add(chamfer4_piece_1)
    with BuildSketch(Plane(origin=(-6.01040764, -6.01040764, 2), x_dir=(1, 0, 0), z_dir=(0, 1, 0))) as chamfer4_piece_2_section:
        Polygon((2.8, CHAMFER4_SIZE), (2.8 - CHAMFER4_SIZE, 0), (2.8, 0), align=None)
    chamfer4_piece_2 = revolve(axis=Axis((-6.01040764, -6.01040764, 2), (0, 0, -1)), mode=Mode.PRIVATE)
    chamfer4_piece_2 = chamfer4_piece_2 - Plane(origin=(-6.01040764, -6.01040764, 1.147189391), x_dir=(1, 0, 0), z_dir=(0, 0, -1)) * Cylinder(1.5, 12, mode=Mode.PRIVATE)
    add(chamfer4_piece_2)
    with BuildSketch(Plane(origin=(6.01040764, -6.01040764, 2), x_dir=(1, 0, 0), z_dir=(0, 1, 0))) as chamfer4_piece_3_section:
        Polygon((2.8, CHAMFER4_SIZE), (2.8 - CHAMFER4_SIZE, 0), (2.8, 0), align=None)
    chamfer4_piece_3 = revolve(axis=Axis((6.01040764, -6.01040764, 2), (0, 0, -1)), mode=Mode.PRIVATE)
    chamfer4_piece_3 = chamfer4_piece_3 - Plane(origin=(6.01040764, -6.01040764, 1.147189391), x_dir=(1, 0, 0), z_dir=(0, 0, -1)) * Cylinder(1.5, 12, mode=Mode.PRIVATE)
    add(chamfer4_piece_3)
    with BuildSketch(Plane(origin=(-6.01040764, 6.01040764, 2), x_dir=(1, 0, 0), z_dir=(0, 1, 0))) as chamfer4_piece_4_section:
        Polygon((2.8, CHAMFER4_SIZE), (2.8 - CHAMFER4_SIZE, 0), (2.8, 0), align=None)
    chamfer4_piece_4 = revolve(axis=Axis((-6.01040764, 6.01040764, 2), (0, 0, -1)), mode=Mode.PRIVATE)
    chamfer4_piece_4 = chamfer4_piece_4 - Plane(origin=(-6.01040764, 6.01040764, 1.147189391), x_dir=(1, 0, 0), z_dir=(0, 0, -1)) * Cylinder(1.5, 12, mode=Mode.PRIVATE)
    add(chamfer4_piece_4)


solid = part.part
